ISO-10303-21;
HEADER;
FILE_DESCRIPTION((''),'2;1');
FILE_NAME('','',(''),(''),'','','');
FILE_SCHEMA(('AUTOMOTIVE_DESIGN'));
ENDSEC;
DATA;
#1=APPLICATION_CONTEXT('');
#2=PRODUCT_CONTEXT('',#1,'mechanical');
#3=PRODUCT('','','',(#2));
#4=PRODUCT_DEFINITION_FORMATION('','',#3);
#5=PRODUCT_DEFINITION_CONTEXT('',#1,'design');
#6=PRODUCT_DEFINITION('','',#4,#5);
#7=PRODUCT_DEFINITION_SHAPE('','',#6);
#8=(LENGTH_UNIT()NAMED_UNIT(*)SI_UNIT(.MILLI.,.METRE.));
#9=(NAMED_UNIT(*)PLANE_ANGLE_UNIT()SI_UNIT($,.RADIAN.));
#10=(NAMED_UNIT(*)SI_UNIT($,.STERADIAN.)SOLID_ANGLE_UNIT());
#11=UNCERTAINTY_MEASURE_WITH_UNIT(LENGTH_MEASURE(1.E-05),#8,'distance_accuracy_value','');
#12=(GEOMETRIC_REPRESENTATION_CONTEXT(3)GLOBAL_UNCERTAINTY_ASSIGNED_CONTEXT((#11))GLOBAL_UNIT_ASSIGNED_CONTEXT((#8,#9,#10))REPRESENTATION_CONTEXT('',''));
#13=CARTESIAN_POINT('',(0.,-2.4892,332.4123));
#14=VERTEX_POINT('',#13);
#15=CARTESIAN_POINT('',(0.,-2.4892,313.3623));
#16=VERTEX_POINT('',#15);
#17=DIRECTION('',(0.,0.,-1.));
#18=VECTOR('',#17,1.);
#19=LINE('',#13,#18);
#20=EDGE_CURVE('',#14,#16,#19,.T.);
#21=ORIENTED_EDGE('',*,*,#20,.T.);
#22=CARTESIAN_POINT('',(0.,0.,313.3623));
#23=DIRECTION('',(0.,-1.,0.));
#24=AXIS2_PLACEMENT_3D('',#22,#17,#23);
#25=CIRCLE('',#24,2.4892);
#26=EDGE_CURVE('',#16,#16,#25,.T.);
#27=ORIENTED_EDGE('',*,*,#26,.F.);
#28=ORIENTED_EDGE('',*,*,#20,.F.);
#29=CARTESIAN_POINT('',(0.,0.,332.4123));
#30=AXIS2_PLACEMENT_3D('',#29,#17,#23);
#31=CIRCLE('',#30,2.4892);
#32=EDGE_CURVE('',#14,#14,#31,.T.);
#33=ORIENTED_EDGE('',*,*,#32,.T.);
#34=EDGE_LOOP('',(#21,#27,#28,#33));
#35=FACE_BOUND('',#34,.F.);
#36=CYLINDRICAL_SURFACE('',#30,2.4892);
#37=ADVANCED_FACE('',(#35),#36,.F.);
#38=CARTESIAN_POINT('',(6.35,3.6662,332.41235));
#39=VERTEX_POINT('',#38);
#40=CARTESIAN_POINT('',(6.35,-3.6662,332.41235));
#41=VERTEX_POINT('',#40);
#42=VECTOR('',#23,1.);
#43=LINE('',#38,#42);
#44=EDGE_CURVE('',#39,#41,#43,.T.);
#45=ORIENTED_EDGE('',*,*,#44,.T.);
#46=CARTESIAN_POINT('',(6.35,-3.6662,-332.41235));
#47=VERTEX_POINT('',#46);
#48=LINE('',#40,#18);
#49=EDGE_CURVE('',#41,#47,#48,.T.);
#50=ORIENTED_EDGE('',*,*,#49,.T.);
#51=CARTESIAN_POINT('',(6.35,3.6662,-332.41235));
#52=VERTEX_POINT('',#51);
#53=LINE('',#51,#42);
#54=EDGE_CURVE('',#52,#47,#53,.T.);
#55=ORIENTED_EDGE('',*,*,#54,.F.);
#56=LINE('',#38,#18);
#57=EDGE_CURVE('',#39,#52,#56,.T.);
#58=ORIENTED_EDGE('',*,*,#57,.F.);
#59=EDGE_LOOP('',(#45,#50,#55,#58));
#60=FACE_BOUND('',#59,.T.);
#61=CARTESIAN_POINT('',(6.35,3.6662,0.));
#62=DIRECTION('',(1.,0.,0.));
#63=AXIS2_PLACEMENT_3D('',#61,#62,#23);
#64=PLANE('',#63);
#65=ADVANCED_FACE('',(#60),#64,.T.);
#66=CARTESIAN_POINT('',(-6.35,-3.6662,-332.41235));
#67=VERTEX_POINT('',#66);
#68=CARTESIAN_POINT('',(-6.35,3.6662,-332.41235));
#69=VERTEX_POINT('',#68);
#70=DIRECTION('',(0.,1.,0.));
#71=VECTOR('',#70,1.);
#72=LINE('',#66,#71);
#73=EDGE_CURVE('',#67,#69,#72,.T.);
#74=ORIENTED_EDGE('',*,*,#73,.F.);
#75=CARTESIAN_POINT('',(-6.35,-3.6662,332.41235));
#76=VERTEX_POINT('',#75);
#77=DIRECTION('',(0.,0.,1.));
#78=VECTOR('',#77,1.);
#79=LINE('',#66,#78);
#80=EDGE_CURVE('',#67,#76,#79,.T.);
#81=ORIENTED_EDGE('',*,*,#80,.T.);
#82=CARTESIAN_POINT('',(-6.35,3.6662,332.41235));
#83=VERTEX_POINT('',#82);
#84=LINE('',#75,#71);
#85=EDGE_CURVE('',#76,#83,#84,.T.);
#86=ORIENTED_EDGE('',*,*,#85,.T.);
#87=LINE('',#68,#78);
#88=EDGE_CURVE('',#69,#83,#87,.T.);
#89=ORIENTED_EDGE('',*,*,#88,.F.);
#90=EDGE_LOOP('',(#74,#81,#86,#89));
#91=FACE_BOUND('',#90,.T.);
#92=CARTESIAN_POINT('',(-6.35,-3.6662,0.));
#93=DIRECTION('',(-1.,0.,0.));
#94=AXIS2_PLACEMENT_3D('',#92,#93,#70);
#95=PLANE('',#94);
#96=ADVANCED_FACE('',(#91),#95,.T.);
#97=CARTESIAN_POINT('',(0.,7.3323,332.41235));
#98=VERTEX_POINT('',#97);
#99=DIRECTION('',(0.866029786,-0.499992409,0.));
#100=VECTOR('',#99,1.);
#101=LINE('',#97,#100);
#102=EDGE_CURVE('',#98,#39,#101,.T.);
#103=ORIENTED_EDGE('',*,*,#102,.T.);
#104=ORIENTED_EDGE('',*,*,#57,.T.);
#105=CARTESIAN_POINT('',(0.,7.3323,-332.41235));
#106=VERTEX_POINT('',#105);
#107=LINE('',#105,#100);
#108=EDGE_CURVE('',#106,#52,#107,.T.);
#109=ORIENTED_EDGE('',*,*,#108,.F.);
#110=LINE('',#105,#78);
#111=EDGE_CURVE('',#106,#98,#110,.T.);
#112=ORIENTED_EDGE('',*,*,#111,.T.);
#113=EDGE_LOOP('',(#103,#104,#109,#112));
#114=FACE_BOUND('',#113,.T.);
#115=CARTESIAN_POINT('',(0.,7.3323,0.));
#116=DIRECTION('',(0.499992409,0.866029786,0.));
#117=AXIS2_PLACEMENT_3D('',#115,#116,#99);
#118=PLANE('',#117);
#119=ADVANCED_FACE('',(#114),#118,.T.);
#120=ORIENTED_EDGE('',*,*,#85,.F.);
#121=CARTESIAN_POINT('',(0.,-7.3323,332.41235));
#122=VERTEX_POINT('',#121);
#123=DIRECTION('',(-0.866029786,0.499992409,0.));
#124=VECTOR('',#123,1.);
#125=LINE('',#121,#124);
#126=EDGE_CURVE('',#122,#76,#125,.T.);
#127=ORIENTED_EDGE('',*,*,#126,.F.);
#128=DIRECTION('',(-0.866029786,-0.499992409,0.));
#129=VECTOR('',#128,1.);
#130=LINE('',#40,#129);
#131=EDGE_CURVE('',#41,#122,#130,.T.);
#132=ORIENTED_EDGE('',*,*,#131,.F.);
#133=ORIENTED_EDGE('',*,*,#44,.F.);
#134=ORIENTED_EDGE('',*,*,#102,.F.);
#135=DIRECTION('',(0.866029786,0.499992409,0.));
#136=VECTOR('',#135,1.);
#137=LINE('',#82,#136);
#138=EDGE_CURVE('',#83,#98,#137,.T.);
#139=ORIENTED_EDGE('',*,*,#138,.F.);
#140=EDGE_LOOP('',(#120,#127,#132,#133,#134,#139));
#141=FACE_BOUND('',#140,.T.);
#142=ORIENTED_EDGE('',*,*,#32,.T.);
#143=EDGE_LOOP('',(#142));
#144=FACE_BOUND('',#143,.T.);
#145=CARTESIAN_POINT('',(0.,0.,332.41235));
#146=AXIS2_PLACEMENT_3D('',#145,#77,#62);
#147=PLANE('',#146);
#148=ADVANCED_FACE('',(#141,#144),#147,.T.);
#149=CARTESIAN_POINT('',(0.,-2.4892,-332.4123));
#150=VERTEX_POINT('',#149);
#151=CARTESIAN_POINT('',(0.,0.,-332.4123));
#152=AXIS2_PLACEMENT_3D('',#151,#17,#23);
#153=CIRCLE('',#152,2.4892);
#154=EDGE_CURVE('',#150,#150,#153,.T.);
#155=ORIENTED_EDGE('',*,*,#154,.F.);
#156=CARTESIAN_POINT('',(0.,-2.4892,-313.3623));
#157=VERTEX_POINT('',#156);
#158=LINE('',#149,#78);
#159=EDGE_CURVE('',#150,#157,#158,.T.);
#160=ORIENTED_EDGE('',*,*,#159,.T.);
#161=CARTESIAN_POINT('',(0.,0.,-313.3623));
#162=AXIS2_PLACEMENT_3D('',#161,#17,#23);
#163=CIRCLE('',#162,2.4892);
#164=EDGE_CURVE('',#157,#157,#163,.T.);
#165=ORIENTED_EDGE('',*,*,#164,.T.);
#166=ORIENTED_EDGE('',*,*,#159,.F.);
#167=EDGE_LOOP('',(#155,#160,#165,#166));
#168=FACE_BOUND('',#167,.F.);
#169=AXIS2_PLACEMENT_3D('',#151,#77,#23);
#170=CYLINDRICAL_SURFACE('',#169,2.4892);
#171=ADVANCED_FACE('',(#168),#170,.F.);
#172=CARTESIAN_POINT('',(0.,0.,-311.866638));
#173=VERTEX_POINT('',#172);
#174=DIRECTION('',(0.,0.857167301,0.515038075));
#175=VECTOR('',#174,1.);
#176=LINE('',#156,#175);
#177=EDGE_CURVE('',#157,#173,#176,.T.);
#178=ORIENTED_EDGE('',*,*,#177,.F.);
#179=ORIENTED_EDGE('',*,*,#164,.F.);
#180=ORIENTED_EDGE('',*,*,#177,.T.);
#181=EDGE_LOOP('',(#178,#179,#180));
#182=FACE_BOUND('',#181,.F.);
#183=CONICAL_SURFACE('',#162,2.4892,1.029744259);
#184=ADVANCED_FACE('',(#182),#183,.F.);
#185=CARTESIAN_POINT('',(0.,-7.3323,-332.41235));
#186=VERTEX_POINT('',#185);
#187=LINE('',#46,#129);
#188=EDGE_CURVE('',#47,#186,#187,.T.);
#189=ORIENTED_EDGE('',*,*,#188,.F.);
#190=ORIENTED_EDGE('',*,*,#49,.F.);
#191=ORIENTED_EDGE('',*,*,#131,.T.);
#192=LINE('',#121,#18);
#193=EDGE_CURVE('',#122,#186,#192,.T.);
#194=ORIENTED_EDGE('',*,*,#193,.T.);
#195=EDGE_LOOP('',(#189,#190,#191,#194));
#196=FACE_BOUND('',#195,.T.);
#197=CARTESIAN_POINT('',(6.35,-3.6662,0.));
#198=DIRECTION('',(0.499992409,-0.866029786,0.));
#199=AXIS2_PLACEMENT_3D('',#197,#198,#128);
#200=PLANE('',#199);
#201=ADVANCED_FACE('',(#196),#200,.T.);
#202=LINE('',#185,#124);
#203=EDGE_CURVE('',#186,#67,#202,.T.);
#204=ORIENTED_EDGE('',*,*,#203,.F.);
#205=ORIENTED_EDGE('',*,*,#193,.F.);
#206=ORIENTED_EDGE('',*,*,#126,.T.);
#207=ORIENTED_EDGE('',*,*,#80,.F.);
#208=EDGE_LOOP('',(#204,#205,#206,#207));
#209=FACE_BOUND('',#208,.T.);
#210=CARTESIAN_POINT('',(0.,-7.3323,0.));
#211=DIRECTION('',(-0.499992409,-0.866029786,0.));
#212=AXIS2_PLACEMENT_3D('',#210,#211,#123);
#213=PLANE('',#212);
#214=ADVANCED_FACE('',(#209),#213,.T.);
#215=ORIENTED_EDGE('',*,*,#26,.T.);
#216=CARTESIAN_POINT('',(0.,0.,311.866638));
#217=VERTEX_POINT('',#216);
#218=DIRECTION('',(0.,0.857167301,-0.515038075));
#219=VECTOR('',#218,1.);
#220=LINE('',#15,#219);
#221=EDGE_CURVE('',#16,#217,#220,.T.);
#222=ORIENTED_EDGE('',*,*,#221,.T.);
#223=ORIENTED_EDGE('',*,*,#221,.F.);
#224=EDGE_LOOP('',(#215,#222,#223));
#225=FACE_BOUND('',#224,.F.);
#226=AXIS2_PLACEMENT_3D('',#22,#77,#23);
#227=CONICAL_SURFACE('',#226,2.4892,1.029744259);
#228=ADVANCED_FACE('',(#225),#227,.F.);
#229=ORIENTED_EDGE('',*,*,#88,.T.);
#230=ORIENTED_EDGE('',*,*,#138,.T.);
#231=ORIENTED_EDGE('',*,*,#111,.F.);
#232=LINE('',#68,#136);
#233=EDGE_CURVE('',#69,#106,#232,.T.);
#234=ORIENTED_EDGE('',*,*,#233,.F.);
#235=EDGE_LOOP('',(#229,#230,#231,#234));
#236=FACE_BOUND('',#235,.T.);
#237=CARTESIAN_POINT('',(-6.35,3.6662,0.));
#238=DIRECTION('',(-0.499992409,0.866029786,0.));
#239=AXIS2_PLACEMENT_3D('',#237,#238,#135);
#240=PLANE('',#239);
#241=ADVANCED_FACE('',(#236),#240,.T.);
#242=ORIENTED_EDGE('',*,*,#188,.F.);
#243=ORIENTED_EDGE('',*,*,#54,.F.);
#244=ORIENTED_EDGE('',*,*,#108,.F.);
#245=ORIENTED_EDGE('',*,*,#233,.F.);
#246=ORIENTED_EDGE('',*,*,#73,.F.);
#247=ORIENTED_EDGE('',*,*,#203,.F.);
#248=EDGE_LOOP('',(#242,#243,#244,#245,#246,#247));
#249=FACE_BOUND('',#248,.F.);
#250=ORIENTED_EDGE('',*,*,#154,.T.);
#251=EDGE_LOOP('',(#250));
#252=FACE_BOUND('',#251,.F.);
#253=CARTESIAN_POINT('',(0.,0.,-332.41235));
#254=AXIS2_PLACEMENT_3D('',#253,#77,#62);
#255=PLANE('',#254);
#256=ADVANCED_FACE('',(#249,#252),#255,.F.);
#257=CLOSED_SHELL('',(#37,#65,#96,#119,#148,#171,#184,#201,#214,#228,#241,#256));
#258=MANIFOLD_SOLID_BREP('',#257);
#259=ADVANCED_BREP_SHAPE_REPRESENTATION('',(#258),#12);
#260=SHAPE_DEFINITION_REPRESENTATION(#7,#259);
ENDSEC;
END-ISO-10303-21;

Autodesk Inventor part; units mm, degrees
ref_plane "YZ Plane" through (0, 0, 0) normal (1, 0, 0) x (0, 1, 0)
ref_plane "XZ Plane" through (0, 0, 0) normal (0, 1, 0) x (-1, 0, 0)
ref_plane "XY Plane" through (0, 0, 0) normal (0, 0, 1) x (1, 0, 0)
sketch "Sketch1" plane through (0, 0, 0) normal (0, 0, 1) x (1, 0, 0)
  line L0 (0, 7.3323) -> (6.35, 3.6662)
  line L1 (6.35, 3.6662) -> (6.35, -3.6662)
  line L2 (6.35, -3.6662) -> (0, -7.3323)
  line L3 (0, -7.3323) -> (-6.35, -3.6662)
  line L4 (-6.35, -3.6662) -> (-6.35, 3.6662)
  line L5 (-6.35, 3.6662) -> (0, 7.3323)
  point P0 (0, 0)
  point P1 (0, 0)
  dimension "d1" = 12.7
extrude "Extrusion1" add sketch "Sketch1" along normal mid plane 664.8247
sketch "Sketch2" plane through (0, 0, 332.4123) normal (0, 0, 1) x (1, 0, 0)
  point P0 (0, 0)
hole "Hole1" at (0, 0, 332.4123) direction (0, 0, -1) diameter 4.9784 depth 19.05 tip angle 118 thread size "1/4-20 UNC" class "2B" standard "ANSI Unified Screw Threads"
mirror "Mirror1" about plane through (0, 0, 0) normal (0, 0, 1) of "Hole1"
properties part number "0.5_Jack_Shaft" material "Aluminum, 6061-T6"
